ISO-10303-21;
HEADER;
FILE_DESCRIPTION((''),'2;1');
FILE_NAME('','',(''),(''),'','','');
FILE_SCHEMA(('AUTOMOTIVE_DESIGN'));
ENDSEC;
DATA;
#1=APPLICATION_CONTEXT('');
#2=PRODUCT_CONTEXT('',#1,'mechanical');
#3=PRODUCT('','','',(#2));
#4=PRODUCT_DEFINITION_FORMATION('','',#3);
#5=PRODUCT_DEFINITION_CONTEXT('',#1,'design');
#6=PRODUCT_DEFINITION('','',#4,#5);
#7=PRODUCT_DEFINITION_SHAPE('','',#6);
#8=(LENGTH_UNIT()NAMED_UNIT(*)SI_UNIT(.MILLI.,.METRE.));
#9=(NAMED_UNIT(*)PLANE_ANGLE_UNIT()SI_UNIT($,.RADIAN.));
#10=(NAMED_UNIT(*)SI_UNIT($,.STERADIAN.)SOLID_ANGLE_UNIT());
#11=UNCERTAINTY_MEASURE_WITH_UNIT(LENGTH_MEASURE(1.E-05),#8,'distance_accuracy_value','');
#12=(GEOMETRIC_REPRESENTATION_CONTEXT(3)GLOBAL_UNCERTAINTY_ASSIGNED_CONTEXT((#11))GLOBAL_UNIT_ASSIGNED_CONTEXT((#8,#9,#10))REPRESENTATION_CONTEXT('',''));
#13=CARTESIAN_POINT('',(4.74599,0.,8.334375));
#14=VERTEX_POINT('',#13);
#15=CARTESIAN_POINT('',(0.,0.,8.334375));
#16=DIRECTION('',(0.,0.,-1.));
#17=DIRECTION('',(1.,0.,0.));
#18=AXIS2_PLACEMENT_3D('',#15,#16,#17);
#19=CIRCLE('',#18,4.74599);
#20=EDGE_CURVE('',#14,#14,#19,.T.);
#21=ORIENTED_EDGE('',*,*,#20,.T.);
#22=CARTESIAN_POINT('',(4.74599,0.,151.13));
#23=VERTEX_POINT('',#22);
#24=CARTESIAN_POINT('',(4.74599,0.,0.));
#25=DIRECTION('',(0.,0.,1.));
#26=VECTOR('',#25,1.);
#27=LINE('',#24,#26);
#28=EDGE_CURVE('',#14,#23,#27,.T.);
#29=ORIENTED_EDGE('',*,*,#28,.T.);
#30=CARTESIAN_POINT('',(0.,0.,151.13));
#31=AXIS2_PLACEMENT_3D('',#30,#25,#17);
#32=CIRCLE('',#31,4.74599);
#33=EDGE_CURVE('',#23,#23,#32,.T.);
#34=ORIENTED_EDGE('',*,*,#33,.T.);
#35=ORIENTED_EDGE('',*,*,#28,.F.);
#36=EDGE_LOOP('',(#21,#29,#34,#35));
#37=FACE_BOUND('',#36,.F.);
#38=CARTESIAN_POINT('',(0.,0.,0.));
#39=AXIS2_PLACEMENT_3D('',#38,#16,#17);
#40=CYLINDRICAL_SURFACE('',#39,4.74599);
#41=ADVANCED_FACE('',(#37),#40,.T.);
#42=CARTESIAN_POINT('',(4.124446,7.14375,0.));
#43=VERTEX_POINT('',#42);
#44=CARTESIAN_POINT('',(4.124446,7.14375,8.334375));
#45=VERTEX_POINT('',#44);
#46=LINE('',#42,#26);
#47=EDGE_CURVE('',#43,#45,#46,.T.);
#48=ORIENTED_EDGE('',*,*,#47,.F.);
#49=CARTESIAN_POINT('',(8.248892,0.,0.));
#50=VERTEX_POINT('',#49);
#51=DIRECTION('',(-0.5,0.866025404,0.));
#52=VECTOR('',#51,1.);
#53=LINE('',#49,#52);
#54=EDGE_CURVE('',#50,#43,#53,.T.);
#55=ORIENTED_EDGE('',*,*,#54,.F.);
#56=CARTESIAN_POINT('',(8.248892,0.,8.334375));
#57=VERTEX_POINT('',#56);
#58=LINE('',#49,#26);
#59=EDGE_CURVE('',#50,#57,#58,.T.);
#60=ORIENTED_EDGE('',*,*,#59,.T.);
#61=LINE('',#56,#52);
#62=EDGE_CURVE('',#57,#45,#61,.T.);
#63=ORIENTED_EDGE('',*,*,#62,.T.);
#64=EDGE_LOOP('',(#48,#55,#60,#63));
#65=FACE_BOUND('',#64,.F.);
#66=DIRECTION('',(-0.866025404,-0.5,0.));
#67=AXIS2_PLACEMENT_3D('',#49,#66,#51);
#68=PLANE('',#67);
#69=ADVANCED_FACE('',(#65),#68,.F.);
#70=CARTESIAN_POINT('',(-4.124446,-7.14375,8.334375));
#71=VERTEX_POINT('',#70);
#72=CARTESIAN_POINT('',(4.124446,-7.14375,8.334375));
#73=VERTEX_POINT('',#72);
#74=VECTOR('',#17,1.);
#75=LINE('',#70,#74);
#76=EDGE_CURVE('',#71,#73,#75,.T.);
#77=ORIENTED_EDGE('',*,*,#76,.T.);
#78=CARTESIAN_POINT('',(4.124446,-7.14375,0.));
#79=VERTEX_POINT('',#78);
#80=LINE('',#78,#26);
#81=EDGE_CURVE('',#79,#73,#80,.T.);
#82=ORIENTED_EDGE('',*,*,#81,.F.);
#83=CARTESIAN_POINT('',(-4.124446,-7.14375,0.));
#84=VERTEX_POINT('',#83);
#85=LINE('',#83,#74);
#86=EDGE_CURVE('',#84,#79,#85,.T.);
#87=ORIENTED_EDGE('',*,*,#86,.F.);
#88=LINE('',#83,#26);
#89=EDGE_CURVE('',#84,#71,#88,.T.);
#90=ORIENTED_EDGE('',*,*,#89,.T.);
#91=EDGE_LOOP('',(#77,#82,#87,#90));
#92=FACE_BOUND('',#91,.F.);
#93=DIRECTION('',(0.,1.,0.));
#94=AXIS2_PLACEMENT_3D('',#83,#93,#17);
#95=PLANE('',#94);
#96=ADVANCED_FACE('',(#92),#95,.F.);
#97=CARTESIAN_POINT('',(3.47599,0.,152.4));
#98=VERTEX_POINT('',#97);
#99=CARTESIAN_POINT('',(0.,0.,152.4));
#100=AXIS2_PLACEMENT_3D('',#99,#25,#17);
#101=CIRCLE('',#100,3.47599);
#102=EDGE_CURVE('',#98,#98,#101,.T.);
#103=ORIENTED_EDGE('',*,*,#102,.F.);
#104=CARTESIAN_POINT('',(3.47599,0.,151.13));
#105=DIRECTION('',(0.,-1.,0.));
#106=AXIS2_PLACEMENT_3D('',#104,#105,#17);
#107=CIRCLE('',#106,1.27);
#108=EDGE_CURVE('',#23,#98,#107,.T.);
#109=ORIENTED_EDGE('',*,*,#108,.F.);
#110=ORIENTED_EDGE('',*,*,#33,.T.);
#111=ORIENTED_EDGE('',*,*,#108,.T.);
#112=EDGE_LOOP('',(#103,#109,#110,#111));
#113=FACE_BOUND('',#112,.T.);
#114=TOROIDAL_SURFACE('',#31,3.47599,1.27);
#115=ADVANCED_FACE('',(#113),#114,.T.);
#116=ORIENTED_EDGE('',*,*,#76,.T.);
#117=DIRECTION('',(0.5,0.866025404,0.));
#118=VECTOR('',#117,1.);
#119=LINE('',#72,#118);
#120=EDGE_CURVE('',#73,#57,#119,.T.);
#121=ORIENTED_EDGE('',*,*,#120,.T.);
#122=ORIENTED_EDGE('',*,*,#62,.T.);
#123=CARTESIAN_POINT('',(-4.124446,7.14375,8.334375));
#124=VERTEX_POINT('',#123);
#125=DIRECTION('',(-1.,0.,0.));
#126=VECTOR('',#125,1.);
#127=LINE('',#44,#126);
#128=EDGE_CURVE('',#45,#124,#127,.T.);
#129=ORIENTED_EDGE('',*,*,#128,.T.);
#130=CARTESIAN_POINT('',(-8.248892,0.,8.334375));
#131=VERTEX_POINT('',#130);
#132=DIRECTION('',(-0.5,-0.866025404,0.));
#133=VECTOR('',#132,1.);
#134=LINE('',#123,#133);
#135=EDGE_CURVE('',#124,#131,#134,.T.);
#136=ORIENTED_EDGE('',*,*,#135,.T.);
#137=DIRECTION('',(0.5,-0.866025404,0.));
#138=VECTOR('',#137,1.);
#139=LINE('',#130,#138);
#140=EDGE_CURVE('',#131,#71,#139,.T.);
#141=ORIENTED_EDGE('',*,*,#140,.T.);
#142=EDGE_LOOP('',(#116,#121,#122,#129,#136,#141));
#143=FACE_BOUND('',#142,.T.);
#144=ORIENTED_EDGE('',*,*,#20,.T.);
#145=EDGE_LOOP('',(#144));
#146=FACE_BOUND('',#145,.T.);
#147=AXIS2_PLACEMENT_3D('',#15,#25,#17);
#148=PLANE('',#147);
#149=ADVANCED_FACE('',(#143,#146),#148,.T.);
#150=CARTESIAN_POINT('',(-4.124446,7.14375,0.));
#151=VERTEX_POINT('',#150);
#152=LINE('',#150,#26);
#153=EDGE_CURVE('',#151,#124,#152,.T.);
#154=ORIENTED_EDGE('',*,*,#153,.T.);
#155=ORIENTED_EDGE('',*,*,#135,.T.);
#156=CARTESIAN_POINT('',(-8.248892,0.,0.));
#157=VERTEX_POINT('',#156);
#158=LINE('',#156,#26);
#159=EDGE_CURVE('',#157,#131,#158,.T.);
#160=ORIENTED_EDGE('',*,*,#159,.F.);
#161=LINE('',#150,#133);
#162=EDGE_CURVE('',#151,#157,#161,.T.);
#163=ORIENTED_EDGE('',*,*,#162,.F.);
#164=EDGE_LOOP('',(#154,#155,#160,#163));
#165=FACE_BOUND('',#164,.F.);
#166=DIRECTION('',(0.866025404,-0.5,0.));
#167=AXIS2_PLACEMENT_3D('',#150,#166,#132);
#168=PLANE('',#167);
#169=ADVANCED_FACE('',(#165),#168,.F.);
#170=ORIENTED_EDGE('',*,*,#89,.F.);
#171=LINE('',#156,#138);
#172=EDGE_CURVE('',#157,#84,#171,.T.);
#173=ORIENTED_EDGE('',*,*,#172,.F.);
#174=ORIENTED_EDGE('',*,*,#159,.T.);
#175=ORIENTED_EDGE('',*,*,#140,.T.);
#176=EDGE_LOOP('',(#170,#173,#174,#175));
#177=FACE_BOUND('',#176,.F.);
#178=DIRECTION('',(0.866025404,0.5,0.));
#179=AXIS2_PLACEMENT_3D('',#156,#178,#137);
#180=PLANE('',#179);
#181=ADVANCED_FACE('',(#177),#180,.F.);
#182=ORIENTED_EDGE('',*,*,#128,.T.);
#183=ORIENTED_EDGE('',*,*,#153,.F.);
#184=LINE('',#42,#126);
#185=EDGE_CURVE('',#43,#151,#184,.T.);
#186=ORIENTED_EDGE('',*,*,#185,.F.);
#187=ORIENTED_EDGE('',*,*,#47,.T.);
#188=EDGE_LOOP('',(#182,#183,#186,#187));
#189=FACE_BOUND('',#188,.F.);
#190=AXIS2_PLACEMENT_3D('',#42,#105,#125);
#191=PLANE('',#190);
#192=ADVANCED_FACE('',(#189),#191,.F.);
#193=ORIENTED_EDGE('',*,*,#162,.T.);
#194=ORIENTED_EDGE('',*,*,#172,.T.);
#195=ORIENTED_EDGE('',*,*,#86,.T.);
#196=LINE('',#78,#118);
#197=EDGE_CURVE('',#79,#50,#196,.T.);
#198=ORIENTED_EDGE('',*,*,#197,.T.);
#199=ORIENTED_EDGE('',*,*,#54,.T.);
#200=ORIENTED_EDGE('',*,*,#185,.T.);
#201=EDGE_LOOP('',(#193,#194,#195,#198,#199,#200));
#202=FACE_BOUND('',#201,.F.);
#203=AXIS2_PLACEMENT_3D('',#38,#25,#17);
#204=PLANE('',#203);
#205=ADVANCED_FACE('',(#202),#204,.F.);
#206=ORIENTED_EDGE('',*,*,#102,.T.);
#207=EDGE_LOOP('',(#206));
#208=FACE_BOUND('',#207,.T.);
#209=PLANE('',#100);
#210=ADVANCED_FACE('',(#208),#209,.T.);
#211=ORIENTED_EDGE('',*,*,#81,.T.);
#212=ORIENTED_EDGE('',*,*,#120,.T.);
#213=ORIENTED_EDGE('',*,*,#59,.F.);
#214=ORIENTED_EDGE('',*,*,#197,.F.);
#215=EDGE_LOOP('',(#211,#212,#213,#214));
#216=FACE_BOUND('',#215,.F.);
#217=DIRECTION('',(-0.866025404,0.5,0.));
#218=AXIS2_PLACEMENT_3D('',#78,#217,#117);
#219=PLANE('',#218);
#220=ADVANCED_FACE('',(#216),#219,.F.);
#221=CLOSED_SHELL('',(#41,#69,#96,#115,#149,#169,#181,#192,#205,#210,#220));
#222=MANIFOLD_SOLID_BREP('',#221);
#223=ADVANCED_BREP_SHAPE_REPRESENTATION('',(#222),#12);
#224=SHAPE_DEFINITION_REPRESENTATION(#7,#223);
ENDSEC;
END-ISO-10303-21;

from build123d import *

# Parameters (mm, degrees)
F0_R     = 4.74599
F1_DEPTH = 152.4
F3_DEPTH = 8.334375
F4_R     = 1.27


# Not quite as in the source:
# - a length typed as a fraction of an inch, garbled in the dataset ("3 / 203.2 mm" for 3/8 in), is restored


with BuildPart() as f1:
    # F0 (on Top) → F1 (new body)
    with BuildSketch(Plane.XY):
        Circle(F0_R)
    extrude(amount=F1_DEPTH)

    # F2 (on Top) → F3 (join)
    with BuildSketch(Plane.XY):
        Polygon((-4.1244459855, -7.14375), (4.1244459855, -7.14375), (8.248891971, 0), (4.1244459855, 7.14375), (-4.1244459855, 7.14375), (-8.248891971, 0), align=None)
    extrude(amount=F3_DEPTH)

    # F4
    f4_edges = [f1.edges().sort_by_distance(p)[0] for p in [
        (-4.74599, 0, 152.4),
    ]]
    fillet(f4_edges, radius=F4_R)


solid = f1.part
